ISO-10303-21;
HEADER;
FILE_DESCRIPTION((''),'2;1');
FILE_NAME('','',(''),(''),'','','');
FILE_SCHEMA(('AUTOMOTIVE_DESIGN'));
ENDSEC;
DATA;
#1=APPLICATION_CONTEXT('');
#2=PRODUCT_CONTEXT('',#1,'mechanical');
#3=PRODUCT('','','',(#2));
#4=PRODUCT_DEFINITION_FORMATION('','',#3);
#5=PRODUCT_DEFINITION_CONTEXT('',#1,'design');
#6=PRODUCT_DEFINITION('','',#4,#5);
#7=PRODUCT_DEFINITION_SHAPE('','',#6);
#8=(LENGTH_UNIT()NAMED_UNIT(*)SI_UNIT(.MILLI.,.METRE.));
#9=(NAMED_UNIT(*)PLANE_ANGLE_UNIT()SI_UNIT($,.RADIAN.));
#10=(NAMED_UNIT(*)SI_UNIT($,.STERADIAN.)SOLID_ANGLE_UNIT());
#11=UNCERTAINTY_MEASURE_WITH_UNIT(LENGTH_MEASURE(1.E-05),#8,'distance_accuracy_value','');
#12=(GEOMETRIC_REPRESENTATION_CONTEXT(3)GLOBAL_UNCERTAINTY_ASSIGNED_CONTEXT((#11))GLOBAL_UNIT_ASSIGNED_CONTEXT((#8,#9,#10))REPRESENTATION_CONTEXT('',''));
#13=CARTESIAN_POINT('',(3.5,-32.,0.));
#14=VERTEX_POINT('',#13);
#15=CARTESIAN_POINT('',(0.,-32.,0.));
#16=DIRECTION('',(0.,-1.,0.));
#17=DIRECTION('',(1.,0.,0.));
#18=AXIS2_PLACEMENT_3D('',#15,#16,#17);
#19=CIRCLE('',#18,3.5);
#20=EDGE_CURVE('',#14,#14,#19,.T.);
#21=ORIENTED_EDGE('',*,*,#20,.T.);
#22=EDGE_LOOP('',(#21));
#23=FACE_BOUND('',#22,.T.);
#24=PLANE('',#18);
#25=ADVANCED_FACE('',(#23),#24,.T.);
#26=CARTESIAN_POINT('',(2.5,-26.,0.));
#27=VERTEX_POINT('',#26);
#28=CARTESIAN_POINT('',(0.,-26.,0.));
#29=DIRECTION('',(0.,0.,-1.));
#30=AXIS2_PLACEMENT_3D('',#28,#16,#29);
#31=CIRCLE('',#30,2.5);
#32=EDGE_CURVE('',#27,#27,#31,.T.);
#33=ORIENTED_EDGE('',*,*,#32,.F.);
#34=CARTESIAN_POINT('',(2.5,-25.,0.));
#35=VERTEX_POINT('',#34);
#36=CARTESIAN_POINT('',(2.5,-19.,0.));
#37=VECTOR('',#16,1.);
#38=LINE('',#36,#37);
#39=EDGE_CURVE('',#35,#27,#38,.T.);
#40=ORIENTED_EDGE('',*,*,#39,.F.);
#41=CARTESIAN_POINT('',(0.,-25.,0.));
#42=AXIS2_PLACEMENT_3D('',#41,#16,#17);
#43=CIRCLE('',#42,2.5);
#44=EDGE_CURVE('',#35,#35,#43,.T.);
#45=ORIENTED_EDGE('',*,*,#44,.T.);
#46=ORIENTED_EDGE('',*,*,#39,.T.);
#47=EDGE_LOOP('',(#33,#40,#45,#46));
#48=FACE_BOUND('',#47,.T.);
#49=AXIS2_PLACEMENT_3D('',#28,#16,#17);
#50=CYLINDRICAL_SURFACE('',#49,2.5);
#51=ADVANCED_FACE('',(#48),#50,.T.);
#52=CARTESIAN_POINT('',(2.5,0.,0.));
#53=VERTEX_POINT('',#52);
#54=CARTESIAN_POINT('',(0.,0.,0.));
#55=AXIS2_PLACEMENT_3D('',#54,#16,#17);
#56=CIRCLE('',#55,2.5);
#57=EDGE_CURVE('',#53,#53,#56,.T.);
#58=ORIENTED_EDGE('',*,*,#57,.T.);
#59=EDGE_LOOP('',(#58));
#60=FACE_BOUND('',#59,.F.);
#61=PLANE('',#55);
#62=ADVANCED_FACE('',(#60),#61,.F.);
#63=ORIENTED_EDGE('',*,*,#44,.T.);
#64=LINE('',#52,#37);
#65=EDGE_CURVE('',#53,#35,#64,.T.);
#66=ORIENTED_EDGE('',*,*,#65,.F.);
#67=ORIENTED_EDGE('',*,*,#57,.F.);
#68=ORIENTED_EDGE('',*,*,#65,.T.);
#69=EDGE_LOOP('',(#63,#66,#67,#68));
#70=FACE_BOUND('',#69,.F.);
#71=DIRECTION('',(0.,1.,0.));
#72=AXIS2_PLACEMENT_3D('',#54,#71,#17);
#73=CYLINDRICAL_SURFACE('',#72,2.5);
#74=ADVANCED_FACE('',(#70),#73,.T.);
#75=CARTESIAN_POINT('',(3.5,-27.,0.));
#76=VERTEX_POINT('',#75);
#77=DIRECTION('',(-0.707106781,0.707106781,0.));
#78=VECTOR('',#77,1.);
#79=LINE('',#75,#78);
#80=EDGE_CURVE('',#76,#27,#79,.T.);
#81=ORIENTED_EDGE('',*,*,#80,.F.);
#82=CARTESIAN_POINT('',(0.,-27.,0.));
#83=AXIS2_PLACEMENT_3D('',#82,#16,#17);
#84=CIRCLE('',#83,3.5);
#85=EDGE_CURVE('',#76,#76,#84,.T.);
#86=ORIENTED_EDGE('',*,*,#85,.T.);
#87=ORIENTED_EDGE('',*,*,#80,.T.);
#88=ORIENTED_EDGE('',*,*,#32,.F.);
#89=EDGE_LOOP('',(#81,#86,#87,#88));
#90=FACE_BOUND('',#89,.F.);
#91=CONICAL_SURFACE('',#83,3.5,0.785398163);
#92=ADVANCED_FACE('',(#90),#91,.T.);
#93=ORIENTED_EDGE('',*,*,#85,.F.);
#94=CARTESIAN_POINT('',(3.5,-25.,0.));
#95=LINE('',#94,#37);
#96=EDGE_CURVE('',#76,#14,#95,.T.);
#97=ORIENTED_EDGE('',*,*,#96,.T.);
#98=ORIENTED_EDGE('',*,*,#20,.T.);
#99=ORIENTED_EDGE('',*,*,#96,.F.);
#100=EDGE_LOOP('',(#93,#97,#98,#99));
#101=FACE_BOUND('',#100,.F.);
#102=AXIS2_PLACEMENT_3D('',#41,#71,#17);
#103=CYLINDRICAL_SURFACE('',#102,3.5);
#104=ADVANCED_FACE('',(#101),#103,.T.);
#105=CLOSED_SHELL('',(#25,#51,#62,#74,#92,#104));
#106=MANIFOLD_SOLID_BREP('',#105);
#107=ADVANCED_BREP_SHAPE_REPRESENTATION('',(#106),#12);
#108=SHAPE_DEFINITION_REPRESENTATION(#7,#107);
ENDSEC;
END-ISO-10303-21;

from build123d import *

# Parameters (mm, degrees)
F0_R        = 2.5
F1_DEPTH    = 25
F2_R        = 3.5
F2_R_2      = 2.5
F3_DEPTH    = 7
F4_S5_R     = 2.5
F4_T6_DEPTH = 7


# Not quite as in the source:
# - a fillet or chamfer that OpenCascade refuses, or shapes differently, is made with other operations: its cross-section is extruded or revolved along the edge and cut away or added


with BuildPart() as f1:
    # F0 (on Front) → F1 (new body)
    with BuildSketch(Plane.XZ):
        Circle(F0_R)
    extrude(amount=F1_DEPTH)

    # F2 (on face) → F3 (join)
    with BuildSketch(Plane.XZ.offset(25)):
        Circle(F2_R)
        Circle(F2_R_2, mode=Mode.SUBTRACT)
        Circle(F2_R_2)
    extrude(amount=F3_DEPTH)

    # F4: chamfer of 2 on 1 edges, made by hand


with BuildPart() as f4_tool2:
    # F4_s3 → F4_t4 (revolve)
    with BuildSketch(Plane.XY):
        Polygon((3.5, -27), (1.5, -25), (3.5, -25), align=None)
    revolve(axis=Axis((0, -25, 0), (0, -1, 0)))

    # F4_s5 → F4_t6 (cut, symmetric)
    with BuildSketch(Plane.XZ.offset(26)):
        Circle(F4_S5_R)
    extrude(amount=F4_T6_DEPTH, both=True, mode=Mode.SUBTRACT)


with BuildPart() as f1_1:
    add(f1.part)

    # F4_t1: cut F4_tool2
    add(f4_tool2.part, mode=Mode.SUBTRACT)


solid = f1_1.part
